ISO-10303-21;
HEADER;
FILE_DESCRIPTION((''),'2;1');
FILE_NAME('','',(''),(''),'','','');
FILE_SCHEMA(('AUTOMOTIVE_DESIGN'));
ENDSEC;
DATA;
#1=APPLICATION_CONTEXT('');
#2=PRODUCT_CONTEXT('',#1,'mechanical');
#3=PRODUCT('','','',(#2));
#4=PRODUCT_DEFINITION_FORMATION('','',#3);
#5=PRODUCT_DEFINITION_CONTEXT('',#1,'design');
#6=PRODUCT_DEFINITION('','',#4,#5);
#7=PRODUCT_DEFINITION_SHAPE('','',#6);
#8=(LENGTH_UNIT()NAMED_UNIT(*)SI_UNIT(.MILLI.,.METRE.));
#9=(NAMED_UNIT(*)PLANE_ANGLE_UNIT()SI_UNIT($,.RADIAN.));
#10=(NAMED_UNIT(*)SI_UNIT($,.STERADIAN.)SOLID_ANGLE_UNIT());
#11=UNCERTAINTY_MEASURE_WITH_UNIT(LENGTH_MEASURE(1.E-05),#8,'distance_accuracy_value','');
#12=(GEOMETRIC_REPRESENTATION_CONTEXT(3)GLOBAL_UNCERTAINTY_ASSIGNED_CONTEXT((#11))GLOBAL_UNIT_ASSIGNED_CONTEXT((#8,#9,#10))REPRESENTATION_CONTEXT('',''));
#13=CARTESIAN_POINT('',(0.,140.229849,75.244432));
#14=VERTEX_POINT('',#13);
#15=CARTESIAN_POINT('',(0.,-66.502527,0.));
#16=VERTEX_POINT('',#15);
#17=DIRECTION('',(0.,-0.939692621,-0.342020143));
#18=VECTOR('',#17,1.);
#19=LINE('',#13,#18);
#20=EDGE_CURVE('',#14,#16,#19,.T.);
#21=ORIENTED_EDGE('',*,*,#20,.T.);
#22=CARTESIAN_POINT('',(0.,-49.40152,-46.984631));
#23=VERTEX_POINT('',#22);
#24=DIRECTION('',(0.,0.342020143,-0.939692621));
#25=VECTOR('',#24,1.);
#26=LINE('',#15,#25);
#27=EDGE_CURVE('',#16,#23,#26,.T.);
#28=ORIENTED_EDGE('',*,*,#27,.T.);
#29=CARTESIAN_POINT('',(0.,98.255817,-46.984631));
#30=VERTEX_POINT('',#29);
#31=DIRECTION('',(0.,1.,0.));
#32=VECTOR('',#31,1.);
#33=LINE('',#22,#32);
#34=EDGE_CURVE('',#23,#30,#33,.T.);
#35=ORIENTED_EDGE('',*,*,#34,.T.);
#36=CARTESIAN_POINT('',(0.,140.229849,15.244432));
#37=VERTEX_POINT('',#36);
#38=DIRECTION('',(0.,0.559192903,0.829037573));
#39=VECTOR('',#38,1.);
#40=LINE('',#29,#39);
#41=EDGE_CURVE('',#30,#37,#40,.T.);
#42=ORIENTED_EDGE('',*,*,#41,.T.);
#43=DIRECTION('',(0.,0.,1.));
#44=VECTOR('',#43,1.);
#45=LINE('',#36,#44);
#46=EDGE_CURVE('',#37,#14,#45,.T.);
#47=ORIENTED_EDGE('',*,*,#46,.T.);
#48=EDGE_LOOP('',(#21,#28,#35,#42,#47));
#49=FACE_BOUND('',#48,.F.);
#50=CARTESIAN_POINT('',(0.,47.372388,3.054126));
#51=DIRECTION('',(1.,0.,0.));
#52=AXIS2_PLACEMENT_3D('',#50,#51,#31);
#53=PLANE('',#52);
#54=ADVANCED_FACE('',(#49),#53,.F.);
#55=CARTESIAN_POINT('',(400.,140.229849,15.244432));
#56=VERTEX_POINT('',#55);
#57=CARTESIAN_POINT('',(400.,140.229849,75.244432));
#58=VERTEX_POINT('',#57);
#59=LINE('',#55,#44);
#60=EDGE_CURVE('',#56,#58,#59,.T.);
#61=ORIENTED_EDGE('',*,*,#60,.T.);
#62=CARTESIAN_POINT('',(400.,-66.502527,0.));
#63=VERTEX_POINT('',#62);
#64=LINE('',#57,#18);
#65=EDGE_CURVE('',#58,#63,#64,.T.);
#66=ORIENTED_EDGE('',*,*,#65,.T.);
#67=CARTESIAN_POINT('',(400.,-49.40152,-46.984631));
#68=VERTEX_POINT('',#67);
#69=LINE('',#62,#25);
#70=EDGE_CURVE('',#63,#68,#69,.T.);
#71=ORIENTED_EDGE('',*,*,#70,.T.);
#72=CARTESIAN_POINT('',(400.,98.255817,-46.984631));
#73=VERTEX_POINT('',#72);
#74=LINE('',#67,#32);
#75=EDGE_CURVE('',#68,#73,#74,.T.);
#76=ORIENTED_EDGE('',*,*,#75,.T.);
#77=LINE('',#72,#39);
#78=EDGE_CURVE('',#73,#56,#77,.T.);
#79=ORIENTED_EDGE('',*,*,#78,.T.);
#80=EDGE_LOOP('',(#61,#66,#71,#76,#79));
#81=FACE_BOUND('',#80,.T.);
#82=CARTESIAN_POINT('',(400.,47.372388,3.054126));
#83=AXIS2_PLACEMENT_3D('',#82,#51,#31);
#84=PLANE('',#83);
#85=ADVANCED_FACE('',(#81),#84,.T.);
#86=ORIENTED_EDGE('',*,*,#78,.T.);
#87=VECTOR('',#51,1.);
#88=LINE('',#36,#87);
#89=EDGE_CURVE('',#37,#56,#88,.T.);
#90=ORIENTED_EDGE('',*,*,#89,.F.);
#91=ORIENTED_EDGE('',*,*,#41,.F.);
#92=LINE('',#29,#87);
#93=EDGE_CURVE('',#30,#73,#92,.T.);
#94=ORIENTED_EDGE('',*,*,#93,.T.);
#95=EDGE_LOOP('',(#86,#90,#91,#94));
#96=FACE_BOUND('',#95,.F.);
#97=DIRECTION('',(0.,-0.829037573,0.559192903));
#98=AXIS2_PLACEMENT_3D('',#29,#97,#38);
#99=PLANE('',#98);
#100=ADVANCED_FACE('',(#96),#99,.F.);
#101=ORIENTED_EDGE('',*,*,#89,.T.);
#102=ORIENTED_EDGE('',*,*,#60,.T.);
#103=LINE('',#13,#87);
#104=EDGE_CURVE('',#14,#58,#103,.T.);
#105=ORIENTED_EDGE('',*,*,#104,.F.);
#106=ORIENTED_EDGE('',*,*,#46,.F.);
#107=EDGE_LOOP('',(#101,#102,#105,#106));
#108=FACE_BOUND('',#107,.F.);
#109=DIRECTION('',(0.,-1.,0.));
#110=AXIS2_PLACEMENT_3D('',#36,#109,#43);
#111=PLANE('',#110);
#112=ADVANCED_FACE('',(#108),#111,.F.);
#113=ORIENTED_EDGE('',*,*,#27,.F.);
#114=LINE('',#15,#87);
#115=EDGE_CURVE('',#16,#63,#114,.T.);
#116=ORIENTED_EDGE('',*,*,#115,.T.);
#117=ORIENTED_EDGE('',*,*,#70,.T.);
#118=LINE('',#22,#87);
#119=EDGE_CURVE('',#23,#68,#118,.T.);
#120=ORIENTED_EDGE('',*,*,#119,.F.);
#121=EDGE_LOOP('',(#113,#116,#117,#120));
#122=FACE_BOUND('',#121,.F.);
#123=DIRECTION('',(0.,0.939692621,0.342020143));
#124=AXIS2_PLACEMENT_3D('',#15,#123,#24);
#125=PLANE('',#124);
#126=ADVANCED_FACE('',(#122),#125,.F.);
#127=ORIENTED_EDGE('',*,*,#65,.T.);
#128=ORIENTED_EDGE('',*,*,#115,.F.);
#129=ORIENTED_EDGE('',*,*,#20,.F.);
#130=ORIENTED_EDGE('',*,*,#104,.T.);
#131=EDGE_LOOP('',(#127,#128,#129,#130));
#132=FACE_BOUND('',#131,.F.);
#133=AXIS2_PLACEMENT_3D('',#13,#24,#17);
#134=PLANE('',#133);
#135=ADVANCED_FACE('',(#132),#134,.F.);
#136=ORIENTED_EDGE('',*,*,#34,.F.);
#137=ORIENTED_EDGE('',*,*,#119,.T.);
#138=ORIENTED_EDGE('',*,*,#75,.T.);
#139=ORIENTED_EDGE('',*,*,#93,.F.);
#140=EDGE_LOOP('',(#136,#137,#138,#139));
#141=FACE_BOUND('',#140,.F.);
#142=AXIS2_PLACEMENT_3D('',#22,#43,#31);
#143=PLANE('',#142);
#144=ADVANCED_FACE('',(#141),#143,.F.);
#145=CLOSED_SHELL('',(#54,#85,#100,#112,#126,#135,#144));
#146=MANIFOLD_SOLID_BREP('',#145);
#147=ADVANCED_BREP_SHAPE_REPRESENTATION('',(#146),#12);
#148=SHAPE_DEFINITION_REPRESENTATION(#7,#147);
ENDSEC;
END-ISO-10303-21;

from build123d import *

# Parameters (mm, degrees)
F1_DEPTH = 400


# Not quite as in the source:
# - a feature names something its author has since deleted; it is built from what else it names


with BuildPart() as f1:
    # F0 (on Right) → F1 (new body)
    with BuildSketch(Plane.YZ):
        Polygon((140.2298494464, 75.2444315316), (-66.5025271265, 0), (-49.4015199602, -46.9846310393), (98.2558167472, -46.9846310393), (140.2298494464, 15.2444315316), align=None)
    extrude(amount=F1_DEPTH)


solid = f1.part
